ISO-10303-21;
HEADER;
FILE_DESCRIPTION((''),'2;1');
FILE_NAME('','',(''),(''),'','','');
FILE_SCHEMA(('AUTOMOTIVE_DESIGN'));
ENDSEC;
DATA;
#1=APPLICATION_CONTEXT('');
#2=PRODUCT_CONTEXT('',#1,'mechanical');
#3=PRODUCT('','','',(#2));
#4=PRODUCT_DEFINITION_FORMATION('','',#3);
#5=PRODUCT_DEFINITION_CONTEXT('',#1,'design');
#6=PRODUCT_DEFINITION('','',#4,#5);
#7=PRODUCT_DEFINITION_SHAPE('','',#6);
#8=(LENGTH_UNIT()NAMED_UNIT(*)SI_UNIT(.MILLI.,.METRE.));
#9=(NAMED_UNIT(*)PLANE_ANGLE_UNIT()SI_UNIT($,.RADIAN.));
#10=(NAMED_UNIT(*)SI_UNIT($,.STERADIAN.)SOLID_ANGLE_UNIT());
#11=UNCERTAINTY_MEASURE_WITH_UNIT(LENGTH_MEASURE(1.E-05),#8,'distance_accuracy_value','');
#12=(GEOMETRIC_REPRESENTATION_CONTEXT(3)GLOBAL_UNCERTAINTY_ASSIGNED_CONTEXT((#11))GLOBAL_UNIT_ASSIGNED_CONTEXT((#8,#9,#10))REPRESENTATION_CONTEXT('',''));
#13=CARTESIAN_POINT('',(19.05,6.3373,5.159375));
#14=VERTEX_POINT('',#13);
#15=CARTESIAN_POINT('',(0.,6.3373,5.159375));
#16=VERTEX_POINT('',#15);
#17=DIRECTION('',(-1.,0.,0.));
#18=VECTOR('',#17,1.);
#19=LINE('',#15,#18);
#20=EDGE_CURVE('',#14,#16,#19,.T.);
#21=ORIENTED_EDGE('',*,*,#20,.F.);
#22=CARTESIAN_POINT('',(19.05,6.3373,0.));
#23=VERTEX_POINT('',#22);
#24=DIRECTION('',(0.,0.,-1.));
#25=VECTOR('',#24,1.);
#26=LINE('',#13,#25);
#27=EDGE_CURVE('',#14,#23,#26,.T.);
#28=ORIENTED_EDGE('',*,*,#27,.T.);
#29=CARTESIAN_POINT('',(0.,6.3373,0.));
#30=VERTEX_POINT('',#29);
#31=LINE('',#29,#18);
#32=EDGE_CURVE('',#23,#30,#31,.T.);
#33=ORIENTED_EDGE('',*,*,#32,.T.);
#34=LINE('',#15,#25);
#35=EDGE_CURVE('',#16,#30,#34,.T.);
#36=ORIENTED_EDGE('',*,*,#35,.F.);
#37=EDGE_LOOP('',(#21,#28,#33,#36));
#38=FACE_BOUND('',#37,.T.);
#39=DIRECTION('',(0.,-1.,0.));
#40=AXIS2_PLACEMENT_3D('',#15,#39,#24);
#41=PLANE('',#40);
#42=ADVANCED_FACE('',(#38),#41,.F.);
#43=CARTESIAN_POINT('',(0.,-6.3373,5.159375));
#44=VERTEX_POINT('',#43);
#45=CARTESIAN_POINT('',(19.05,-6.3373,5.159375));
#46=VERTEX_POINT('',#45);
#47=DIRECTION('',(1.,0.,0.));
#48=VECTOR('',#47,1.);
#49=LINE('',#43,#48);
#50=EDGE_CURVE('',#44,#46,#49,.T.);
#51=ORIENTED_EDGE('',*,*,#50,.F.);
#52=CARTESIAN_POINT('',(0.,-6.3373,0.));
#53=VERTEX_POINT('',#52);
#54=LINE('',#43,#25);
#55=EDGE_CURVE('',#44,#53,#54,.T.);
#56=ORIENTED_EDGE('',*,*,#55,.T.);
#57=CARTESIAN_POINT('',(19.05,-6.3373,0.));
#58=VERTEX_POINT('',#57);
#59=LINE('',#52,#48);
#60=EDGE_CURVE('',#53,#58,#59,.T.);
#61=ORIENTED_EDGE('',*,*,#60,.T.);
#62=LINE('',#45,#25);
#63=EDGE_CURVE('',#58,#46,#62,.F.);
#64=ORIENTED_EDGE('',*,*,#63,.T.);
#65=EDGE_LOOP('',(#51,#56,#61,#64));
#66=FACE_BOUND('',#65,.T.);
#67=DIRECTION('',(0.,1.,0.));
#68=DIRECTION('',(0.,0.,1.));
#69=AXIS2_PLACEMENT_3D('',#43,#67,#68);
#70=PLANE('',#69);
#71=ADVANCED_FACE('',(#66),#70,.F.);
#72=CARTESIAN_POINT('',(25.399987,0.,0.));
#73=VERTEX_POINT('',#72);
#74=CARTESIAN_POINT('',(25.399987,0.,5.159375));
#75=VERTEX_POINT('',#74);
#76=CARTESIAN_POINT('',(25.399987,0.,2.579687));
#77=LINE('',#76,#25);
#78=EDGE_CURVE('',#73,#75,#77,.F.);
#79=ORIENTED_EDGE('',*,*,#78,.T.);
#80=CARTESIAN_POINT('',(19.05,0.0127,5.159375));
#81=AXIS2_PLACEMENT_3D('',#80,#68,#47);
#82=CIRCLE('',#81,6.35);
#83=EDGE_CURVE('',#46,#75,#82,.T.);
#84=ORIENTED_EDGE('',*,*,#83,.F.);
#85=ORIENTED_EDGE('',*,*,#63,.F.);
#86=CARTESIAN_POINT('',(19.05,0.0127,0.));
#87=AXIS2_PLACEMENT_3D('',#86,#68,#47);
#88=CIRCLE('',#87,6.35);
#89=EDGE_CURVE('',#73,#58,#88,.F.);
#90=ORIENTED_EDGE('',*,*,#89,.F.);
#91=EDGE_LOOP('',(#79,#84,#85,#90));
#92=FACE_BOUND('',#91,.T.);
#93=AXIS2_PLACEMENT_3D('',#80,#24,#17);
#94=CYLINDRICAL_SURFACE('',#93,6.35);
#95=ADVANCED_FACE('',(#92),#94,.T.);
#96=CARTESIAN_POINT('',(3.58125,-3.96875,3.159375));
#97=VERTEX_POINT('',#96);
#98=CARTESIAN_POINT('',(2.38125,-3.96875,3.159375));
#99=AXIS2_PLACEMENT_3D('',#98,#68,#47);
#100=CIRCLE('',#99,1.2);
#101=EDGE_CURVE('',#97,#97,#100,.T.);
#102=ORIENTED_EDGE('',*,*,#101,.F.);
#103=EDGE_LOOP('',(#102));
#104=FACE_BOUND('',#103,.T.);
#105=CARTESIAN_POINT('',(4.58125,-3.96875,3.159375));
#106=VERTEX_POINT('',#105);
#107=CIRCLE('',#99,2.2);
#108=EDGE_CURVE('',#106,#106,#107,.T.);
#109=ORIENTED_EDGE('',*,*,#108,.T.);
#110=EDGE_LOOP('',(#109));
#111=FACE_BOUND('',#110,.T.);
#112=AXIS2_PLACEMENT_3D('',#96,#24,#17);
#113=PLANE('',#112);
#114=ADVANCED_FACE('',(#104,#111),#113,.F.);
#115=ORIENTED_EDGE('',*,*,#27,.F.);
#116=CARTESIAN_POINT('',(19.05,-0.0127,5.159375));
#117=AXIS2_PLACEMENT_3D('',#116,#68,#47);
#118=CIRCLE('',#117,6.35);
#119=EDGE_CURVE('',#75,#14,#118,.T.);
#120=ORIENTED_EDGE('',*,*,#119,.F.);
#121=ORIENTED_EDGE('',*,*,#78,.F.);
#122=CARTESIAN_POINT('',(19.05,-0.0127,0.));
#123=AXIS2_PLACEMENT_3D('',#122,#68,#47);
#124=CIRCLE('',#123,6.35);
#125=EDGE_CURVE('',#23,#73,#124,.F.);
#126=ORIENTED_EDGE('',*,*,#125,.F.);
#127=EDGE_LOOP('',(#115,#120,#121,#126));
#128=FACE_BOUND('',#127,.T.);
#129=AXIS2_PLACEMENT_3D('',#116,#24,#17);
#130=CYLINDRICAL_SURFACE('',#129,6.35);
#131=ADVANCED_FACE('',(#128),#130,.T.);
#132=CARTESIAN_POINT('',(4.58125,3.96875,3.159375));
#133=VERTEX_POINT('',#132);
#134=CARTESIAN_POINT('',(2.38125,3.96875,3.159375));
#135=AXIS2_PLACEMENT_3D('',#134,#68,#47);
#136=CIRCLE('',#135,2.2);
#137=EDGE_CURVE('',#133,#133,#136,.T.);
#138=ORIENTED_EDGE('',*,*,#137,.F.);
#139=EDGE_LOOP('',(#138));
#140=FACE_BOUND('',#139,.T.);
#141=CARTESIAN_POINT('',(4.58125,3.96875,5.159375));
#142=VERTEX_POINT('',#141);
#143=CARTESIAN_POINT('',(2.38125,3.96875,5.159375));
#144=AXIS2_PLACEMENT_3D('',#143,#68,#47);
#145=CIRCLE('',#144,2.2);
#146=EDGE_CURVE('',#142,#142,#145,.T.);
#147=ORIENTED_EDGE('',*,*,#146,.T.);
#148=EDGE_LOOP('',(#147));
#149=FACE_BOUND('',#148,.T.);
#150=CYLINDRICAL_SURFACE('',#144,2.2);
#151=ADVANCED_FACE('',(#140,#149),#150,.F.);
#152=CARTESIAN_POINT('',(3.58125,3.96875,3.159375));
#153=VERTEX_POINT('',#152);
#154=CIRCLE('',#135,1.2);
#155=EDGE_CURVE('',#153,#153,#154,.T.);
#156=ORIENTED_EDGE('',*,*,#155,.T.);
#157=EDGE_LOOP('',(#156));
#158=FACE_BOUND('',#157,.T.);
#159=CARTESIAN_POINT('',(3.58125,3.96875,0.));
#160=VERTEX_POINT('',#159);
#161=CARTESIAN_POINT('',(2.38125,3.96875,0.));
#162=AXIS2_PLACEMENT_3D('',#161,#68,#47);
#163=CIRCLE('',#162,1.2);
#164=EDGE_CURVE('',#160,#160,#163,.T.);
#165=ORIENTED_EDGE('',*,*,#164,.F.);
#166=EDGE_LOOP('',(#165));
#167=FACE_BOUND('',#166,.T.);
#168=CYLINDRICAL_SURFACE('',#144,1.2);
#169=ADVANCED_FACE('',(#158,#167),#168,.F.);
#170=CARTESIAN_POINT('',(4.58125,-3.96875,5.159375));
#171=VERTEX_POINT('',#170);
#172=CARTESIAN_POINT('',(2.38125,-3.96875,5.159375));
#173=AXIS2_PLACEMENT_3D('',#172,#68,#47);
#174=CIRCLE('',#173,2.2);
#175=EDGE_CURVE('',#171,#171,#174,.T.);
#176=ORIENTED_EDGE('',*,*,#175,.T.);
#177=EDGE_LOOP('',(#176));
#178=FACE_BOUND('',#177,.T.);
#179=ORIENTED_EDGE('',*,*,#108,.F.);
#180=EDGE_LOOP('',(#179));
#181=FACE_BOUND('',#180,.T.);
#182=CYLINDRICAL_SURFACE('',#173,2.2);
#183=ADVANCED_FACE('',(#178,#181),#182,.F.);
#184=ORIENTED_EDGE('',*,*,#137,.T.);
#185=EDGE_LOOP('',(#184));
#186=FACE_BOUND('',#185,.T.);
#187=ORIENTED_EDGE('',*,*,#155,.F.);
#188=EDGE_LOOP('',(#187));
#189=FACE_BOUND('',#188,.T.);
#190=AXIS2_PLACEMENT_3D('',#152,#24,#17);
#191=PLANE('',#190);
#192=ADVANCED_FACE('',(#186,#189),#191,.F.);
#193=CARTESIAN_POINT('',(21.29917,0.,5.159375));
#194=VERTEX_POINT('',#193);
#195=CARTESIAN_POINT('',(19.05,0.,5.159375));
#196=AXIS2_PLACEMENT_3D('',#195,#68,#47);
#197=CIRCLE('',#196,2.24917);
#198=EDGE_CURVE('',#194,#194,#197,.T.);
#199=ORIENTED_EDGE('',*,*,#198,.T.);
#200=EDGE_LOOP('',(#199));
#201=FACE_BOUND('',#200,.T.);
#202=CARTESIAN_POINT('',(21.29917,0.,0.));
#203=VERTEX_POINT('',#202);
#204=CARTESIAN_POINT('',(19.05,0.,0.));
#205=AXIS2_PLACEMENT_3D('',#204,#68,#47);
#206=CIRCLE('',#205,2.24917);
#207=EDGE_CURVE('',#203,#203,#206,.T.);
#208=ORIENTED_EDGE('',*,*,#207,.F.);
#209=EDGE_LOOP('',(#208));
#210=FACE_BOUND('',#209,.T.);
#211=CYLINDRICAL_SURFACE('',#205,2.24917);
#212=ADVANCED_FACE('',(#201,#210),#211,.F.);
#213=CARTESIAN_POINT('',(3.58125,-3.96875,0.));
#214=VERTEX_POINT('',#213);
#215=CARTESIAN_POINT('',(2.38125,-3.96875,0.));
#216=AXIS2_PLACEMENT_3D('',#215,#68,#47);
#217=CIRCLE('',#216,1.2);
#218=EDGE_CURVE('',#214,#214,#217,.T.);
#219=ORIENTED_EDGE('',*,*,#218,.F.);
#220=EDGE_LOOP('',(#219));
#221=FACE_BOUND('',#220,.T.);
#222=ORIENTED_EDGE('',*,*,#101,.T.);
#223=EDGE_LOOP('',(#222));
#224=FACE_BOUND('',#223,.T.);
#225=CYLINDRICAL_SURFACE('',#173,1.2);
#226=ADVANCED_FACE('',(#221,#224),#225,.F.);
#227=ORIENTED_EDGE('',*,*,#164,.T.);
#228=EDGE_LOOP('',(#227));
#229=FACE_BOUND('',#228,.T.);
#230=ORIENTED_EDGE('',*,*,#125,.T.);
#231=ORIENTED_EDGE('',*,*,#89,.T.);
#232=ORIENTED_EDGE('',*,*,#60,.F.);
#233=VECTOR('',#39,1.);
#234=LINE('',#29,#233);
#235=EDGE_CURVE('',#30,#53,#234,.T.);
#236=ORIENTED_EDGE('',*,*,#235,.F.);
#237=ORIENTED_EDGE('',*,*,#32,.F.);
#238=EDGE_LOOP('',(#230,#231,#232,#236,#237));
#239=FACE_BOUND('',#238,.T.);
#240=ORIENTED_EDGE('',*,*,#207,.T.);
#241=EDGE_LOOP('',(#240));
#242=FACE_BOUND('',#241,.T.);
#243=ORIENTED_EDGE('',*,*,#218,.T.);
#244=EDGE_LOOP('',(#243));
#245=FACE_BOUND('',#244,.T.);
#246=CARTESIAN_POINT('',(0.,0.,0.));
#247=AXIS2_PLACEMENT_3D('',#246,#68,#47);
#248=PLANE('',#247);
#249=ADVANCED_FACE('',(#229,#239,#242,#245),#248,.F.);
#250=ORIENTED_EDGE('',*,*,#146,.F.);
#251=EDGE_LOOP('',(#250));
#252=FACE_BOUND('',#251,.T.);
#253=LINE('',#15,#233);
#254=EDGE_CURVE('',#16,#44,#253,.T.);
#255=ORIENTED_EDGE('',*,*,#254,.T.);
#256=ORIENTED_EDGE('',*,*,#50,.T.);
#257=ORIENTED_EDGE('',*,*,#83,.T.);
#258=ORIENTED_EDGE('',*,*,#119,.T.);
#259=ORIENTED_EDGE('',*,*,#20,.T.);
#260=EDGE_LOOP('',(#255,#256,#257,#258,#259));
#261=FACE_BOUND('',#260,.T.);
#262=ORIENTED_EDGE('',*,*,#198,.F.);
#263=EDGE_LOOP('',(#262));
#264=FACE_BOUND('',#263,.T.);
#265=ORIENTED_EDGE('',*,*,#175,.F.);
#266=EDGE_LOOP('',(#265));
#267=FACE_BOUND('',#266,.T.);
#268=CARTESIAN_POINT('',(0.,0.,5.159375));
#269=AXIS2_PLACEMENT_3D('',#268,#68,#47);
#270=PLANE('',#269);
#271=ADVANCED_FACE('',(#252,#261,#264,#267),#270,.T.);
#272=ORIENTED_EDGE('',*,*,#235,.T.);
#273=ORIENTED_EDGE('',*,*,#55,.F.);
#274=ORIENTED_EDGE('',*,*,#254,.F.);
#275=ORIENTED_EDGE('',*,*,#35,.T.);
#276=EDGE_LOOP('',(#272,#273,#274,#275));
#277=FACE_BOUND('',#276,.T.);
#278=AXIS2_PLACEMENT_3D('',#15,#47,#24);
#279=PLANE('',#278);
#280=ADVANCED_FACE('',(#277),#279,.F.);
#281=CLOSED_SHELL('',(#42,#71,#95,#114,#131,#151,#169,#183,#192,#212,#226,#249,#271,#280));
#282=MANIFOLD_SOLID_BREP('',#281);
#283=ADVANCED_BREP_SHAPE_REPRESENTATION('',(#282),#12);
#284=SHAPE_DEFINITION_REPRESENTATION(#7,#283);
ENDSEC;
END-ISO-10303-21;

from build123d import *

# Parameters (mm, degrees)
SKETCH1_W                      = 25.4
SKETCH1_H                      = 12.6746
BOSS_EXTRUDE1_DEPTH            = 5.159375
SKETCH2_R                      = 2.24917
CUT_EXTRUDE1_DEPTH             = 27.682213583
FILLET1_R                      = 6.35
CBORE_FOR_M2_SHCS1_D           = 2.4
CBORE_FOR_M2_SHCS1_CBORE_D     = 4.4
CBORE_FOR_M2_SHCS1_CBORE_DEPTH = 2


with BuildPart() as part:
    # Sketch1 → Boss-Extrude1 (new body)
    with BuildSketch(Plane.XY):
        with Locations((12.7, 0)):
            Rectangle(SKETCH1_W, SKETCH1_H)
    extrude(amount=BOSS_EXTRUDE1_DEPTH)

    # Sketch2 → Cut-Extrude1 (cut, through all)
    with BuildSketch(Plane.XY.offset(5.159375)):
        with Locations((19.05, 0)):
            Circle(SKETCH2_R)
    extrude(amount=-CUT_EXTRUDE1_DEPTH, mode=Mode.SUBTRACT)

    # Fillet1
    # the kernel refuses this fillet: 6.35 mm, written as the material it takes off along each edge
    with BuildSketch(Plane(origin=(25.4, -6.3373, -15.875), x_dir=(0, 1, 0), z_dir=(0, 0, 1)), Plane(origin=(25.4, 6.3373, -15.875), x_dir=(-1, 0, 0), z_dir=(0, 0, 1))) as fillet1_piece_1:
        with BuildLine():
            CenterArc((FILLET1_R, FILLET1_R), FILLET1_R, 180, 90)
            Line((0, FILLET1_R), (0, 0))
            Line((0, 0), (FILLET1_R, 0))
        make_face()
    extrude(amount=36.909375, mode=Mode.SUBTRACT)

    # CBORE for M2 SHCS1 (through all)
    with Locations(Plane.XY.offset(5.159375)):
        with Locations((2.38125, 3.96875), (2.38125, -3.96875)):
            CounterBoreHole(CBORE_FOR_M2_SHCS1_D / 2, CBORE_FOR_M2_SHCS1_CBORE_D / 2, CBORE_FOR_M2_SHCS1_CBORE_DEPTH)


solid = part.part
